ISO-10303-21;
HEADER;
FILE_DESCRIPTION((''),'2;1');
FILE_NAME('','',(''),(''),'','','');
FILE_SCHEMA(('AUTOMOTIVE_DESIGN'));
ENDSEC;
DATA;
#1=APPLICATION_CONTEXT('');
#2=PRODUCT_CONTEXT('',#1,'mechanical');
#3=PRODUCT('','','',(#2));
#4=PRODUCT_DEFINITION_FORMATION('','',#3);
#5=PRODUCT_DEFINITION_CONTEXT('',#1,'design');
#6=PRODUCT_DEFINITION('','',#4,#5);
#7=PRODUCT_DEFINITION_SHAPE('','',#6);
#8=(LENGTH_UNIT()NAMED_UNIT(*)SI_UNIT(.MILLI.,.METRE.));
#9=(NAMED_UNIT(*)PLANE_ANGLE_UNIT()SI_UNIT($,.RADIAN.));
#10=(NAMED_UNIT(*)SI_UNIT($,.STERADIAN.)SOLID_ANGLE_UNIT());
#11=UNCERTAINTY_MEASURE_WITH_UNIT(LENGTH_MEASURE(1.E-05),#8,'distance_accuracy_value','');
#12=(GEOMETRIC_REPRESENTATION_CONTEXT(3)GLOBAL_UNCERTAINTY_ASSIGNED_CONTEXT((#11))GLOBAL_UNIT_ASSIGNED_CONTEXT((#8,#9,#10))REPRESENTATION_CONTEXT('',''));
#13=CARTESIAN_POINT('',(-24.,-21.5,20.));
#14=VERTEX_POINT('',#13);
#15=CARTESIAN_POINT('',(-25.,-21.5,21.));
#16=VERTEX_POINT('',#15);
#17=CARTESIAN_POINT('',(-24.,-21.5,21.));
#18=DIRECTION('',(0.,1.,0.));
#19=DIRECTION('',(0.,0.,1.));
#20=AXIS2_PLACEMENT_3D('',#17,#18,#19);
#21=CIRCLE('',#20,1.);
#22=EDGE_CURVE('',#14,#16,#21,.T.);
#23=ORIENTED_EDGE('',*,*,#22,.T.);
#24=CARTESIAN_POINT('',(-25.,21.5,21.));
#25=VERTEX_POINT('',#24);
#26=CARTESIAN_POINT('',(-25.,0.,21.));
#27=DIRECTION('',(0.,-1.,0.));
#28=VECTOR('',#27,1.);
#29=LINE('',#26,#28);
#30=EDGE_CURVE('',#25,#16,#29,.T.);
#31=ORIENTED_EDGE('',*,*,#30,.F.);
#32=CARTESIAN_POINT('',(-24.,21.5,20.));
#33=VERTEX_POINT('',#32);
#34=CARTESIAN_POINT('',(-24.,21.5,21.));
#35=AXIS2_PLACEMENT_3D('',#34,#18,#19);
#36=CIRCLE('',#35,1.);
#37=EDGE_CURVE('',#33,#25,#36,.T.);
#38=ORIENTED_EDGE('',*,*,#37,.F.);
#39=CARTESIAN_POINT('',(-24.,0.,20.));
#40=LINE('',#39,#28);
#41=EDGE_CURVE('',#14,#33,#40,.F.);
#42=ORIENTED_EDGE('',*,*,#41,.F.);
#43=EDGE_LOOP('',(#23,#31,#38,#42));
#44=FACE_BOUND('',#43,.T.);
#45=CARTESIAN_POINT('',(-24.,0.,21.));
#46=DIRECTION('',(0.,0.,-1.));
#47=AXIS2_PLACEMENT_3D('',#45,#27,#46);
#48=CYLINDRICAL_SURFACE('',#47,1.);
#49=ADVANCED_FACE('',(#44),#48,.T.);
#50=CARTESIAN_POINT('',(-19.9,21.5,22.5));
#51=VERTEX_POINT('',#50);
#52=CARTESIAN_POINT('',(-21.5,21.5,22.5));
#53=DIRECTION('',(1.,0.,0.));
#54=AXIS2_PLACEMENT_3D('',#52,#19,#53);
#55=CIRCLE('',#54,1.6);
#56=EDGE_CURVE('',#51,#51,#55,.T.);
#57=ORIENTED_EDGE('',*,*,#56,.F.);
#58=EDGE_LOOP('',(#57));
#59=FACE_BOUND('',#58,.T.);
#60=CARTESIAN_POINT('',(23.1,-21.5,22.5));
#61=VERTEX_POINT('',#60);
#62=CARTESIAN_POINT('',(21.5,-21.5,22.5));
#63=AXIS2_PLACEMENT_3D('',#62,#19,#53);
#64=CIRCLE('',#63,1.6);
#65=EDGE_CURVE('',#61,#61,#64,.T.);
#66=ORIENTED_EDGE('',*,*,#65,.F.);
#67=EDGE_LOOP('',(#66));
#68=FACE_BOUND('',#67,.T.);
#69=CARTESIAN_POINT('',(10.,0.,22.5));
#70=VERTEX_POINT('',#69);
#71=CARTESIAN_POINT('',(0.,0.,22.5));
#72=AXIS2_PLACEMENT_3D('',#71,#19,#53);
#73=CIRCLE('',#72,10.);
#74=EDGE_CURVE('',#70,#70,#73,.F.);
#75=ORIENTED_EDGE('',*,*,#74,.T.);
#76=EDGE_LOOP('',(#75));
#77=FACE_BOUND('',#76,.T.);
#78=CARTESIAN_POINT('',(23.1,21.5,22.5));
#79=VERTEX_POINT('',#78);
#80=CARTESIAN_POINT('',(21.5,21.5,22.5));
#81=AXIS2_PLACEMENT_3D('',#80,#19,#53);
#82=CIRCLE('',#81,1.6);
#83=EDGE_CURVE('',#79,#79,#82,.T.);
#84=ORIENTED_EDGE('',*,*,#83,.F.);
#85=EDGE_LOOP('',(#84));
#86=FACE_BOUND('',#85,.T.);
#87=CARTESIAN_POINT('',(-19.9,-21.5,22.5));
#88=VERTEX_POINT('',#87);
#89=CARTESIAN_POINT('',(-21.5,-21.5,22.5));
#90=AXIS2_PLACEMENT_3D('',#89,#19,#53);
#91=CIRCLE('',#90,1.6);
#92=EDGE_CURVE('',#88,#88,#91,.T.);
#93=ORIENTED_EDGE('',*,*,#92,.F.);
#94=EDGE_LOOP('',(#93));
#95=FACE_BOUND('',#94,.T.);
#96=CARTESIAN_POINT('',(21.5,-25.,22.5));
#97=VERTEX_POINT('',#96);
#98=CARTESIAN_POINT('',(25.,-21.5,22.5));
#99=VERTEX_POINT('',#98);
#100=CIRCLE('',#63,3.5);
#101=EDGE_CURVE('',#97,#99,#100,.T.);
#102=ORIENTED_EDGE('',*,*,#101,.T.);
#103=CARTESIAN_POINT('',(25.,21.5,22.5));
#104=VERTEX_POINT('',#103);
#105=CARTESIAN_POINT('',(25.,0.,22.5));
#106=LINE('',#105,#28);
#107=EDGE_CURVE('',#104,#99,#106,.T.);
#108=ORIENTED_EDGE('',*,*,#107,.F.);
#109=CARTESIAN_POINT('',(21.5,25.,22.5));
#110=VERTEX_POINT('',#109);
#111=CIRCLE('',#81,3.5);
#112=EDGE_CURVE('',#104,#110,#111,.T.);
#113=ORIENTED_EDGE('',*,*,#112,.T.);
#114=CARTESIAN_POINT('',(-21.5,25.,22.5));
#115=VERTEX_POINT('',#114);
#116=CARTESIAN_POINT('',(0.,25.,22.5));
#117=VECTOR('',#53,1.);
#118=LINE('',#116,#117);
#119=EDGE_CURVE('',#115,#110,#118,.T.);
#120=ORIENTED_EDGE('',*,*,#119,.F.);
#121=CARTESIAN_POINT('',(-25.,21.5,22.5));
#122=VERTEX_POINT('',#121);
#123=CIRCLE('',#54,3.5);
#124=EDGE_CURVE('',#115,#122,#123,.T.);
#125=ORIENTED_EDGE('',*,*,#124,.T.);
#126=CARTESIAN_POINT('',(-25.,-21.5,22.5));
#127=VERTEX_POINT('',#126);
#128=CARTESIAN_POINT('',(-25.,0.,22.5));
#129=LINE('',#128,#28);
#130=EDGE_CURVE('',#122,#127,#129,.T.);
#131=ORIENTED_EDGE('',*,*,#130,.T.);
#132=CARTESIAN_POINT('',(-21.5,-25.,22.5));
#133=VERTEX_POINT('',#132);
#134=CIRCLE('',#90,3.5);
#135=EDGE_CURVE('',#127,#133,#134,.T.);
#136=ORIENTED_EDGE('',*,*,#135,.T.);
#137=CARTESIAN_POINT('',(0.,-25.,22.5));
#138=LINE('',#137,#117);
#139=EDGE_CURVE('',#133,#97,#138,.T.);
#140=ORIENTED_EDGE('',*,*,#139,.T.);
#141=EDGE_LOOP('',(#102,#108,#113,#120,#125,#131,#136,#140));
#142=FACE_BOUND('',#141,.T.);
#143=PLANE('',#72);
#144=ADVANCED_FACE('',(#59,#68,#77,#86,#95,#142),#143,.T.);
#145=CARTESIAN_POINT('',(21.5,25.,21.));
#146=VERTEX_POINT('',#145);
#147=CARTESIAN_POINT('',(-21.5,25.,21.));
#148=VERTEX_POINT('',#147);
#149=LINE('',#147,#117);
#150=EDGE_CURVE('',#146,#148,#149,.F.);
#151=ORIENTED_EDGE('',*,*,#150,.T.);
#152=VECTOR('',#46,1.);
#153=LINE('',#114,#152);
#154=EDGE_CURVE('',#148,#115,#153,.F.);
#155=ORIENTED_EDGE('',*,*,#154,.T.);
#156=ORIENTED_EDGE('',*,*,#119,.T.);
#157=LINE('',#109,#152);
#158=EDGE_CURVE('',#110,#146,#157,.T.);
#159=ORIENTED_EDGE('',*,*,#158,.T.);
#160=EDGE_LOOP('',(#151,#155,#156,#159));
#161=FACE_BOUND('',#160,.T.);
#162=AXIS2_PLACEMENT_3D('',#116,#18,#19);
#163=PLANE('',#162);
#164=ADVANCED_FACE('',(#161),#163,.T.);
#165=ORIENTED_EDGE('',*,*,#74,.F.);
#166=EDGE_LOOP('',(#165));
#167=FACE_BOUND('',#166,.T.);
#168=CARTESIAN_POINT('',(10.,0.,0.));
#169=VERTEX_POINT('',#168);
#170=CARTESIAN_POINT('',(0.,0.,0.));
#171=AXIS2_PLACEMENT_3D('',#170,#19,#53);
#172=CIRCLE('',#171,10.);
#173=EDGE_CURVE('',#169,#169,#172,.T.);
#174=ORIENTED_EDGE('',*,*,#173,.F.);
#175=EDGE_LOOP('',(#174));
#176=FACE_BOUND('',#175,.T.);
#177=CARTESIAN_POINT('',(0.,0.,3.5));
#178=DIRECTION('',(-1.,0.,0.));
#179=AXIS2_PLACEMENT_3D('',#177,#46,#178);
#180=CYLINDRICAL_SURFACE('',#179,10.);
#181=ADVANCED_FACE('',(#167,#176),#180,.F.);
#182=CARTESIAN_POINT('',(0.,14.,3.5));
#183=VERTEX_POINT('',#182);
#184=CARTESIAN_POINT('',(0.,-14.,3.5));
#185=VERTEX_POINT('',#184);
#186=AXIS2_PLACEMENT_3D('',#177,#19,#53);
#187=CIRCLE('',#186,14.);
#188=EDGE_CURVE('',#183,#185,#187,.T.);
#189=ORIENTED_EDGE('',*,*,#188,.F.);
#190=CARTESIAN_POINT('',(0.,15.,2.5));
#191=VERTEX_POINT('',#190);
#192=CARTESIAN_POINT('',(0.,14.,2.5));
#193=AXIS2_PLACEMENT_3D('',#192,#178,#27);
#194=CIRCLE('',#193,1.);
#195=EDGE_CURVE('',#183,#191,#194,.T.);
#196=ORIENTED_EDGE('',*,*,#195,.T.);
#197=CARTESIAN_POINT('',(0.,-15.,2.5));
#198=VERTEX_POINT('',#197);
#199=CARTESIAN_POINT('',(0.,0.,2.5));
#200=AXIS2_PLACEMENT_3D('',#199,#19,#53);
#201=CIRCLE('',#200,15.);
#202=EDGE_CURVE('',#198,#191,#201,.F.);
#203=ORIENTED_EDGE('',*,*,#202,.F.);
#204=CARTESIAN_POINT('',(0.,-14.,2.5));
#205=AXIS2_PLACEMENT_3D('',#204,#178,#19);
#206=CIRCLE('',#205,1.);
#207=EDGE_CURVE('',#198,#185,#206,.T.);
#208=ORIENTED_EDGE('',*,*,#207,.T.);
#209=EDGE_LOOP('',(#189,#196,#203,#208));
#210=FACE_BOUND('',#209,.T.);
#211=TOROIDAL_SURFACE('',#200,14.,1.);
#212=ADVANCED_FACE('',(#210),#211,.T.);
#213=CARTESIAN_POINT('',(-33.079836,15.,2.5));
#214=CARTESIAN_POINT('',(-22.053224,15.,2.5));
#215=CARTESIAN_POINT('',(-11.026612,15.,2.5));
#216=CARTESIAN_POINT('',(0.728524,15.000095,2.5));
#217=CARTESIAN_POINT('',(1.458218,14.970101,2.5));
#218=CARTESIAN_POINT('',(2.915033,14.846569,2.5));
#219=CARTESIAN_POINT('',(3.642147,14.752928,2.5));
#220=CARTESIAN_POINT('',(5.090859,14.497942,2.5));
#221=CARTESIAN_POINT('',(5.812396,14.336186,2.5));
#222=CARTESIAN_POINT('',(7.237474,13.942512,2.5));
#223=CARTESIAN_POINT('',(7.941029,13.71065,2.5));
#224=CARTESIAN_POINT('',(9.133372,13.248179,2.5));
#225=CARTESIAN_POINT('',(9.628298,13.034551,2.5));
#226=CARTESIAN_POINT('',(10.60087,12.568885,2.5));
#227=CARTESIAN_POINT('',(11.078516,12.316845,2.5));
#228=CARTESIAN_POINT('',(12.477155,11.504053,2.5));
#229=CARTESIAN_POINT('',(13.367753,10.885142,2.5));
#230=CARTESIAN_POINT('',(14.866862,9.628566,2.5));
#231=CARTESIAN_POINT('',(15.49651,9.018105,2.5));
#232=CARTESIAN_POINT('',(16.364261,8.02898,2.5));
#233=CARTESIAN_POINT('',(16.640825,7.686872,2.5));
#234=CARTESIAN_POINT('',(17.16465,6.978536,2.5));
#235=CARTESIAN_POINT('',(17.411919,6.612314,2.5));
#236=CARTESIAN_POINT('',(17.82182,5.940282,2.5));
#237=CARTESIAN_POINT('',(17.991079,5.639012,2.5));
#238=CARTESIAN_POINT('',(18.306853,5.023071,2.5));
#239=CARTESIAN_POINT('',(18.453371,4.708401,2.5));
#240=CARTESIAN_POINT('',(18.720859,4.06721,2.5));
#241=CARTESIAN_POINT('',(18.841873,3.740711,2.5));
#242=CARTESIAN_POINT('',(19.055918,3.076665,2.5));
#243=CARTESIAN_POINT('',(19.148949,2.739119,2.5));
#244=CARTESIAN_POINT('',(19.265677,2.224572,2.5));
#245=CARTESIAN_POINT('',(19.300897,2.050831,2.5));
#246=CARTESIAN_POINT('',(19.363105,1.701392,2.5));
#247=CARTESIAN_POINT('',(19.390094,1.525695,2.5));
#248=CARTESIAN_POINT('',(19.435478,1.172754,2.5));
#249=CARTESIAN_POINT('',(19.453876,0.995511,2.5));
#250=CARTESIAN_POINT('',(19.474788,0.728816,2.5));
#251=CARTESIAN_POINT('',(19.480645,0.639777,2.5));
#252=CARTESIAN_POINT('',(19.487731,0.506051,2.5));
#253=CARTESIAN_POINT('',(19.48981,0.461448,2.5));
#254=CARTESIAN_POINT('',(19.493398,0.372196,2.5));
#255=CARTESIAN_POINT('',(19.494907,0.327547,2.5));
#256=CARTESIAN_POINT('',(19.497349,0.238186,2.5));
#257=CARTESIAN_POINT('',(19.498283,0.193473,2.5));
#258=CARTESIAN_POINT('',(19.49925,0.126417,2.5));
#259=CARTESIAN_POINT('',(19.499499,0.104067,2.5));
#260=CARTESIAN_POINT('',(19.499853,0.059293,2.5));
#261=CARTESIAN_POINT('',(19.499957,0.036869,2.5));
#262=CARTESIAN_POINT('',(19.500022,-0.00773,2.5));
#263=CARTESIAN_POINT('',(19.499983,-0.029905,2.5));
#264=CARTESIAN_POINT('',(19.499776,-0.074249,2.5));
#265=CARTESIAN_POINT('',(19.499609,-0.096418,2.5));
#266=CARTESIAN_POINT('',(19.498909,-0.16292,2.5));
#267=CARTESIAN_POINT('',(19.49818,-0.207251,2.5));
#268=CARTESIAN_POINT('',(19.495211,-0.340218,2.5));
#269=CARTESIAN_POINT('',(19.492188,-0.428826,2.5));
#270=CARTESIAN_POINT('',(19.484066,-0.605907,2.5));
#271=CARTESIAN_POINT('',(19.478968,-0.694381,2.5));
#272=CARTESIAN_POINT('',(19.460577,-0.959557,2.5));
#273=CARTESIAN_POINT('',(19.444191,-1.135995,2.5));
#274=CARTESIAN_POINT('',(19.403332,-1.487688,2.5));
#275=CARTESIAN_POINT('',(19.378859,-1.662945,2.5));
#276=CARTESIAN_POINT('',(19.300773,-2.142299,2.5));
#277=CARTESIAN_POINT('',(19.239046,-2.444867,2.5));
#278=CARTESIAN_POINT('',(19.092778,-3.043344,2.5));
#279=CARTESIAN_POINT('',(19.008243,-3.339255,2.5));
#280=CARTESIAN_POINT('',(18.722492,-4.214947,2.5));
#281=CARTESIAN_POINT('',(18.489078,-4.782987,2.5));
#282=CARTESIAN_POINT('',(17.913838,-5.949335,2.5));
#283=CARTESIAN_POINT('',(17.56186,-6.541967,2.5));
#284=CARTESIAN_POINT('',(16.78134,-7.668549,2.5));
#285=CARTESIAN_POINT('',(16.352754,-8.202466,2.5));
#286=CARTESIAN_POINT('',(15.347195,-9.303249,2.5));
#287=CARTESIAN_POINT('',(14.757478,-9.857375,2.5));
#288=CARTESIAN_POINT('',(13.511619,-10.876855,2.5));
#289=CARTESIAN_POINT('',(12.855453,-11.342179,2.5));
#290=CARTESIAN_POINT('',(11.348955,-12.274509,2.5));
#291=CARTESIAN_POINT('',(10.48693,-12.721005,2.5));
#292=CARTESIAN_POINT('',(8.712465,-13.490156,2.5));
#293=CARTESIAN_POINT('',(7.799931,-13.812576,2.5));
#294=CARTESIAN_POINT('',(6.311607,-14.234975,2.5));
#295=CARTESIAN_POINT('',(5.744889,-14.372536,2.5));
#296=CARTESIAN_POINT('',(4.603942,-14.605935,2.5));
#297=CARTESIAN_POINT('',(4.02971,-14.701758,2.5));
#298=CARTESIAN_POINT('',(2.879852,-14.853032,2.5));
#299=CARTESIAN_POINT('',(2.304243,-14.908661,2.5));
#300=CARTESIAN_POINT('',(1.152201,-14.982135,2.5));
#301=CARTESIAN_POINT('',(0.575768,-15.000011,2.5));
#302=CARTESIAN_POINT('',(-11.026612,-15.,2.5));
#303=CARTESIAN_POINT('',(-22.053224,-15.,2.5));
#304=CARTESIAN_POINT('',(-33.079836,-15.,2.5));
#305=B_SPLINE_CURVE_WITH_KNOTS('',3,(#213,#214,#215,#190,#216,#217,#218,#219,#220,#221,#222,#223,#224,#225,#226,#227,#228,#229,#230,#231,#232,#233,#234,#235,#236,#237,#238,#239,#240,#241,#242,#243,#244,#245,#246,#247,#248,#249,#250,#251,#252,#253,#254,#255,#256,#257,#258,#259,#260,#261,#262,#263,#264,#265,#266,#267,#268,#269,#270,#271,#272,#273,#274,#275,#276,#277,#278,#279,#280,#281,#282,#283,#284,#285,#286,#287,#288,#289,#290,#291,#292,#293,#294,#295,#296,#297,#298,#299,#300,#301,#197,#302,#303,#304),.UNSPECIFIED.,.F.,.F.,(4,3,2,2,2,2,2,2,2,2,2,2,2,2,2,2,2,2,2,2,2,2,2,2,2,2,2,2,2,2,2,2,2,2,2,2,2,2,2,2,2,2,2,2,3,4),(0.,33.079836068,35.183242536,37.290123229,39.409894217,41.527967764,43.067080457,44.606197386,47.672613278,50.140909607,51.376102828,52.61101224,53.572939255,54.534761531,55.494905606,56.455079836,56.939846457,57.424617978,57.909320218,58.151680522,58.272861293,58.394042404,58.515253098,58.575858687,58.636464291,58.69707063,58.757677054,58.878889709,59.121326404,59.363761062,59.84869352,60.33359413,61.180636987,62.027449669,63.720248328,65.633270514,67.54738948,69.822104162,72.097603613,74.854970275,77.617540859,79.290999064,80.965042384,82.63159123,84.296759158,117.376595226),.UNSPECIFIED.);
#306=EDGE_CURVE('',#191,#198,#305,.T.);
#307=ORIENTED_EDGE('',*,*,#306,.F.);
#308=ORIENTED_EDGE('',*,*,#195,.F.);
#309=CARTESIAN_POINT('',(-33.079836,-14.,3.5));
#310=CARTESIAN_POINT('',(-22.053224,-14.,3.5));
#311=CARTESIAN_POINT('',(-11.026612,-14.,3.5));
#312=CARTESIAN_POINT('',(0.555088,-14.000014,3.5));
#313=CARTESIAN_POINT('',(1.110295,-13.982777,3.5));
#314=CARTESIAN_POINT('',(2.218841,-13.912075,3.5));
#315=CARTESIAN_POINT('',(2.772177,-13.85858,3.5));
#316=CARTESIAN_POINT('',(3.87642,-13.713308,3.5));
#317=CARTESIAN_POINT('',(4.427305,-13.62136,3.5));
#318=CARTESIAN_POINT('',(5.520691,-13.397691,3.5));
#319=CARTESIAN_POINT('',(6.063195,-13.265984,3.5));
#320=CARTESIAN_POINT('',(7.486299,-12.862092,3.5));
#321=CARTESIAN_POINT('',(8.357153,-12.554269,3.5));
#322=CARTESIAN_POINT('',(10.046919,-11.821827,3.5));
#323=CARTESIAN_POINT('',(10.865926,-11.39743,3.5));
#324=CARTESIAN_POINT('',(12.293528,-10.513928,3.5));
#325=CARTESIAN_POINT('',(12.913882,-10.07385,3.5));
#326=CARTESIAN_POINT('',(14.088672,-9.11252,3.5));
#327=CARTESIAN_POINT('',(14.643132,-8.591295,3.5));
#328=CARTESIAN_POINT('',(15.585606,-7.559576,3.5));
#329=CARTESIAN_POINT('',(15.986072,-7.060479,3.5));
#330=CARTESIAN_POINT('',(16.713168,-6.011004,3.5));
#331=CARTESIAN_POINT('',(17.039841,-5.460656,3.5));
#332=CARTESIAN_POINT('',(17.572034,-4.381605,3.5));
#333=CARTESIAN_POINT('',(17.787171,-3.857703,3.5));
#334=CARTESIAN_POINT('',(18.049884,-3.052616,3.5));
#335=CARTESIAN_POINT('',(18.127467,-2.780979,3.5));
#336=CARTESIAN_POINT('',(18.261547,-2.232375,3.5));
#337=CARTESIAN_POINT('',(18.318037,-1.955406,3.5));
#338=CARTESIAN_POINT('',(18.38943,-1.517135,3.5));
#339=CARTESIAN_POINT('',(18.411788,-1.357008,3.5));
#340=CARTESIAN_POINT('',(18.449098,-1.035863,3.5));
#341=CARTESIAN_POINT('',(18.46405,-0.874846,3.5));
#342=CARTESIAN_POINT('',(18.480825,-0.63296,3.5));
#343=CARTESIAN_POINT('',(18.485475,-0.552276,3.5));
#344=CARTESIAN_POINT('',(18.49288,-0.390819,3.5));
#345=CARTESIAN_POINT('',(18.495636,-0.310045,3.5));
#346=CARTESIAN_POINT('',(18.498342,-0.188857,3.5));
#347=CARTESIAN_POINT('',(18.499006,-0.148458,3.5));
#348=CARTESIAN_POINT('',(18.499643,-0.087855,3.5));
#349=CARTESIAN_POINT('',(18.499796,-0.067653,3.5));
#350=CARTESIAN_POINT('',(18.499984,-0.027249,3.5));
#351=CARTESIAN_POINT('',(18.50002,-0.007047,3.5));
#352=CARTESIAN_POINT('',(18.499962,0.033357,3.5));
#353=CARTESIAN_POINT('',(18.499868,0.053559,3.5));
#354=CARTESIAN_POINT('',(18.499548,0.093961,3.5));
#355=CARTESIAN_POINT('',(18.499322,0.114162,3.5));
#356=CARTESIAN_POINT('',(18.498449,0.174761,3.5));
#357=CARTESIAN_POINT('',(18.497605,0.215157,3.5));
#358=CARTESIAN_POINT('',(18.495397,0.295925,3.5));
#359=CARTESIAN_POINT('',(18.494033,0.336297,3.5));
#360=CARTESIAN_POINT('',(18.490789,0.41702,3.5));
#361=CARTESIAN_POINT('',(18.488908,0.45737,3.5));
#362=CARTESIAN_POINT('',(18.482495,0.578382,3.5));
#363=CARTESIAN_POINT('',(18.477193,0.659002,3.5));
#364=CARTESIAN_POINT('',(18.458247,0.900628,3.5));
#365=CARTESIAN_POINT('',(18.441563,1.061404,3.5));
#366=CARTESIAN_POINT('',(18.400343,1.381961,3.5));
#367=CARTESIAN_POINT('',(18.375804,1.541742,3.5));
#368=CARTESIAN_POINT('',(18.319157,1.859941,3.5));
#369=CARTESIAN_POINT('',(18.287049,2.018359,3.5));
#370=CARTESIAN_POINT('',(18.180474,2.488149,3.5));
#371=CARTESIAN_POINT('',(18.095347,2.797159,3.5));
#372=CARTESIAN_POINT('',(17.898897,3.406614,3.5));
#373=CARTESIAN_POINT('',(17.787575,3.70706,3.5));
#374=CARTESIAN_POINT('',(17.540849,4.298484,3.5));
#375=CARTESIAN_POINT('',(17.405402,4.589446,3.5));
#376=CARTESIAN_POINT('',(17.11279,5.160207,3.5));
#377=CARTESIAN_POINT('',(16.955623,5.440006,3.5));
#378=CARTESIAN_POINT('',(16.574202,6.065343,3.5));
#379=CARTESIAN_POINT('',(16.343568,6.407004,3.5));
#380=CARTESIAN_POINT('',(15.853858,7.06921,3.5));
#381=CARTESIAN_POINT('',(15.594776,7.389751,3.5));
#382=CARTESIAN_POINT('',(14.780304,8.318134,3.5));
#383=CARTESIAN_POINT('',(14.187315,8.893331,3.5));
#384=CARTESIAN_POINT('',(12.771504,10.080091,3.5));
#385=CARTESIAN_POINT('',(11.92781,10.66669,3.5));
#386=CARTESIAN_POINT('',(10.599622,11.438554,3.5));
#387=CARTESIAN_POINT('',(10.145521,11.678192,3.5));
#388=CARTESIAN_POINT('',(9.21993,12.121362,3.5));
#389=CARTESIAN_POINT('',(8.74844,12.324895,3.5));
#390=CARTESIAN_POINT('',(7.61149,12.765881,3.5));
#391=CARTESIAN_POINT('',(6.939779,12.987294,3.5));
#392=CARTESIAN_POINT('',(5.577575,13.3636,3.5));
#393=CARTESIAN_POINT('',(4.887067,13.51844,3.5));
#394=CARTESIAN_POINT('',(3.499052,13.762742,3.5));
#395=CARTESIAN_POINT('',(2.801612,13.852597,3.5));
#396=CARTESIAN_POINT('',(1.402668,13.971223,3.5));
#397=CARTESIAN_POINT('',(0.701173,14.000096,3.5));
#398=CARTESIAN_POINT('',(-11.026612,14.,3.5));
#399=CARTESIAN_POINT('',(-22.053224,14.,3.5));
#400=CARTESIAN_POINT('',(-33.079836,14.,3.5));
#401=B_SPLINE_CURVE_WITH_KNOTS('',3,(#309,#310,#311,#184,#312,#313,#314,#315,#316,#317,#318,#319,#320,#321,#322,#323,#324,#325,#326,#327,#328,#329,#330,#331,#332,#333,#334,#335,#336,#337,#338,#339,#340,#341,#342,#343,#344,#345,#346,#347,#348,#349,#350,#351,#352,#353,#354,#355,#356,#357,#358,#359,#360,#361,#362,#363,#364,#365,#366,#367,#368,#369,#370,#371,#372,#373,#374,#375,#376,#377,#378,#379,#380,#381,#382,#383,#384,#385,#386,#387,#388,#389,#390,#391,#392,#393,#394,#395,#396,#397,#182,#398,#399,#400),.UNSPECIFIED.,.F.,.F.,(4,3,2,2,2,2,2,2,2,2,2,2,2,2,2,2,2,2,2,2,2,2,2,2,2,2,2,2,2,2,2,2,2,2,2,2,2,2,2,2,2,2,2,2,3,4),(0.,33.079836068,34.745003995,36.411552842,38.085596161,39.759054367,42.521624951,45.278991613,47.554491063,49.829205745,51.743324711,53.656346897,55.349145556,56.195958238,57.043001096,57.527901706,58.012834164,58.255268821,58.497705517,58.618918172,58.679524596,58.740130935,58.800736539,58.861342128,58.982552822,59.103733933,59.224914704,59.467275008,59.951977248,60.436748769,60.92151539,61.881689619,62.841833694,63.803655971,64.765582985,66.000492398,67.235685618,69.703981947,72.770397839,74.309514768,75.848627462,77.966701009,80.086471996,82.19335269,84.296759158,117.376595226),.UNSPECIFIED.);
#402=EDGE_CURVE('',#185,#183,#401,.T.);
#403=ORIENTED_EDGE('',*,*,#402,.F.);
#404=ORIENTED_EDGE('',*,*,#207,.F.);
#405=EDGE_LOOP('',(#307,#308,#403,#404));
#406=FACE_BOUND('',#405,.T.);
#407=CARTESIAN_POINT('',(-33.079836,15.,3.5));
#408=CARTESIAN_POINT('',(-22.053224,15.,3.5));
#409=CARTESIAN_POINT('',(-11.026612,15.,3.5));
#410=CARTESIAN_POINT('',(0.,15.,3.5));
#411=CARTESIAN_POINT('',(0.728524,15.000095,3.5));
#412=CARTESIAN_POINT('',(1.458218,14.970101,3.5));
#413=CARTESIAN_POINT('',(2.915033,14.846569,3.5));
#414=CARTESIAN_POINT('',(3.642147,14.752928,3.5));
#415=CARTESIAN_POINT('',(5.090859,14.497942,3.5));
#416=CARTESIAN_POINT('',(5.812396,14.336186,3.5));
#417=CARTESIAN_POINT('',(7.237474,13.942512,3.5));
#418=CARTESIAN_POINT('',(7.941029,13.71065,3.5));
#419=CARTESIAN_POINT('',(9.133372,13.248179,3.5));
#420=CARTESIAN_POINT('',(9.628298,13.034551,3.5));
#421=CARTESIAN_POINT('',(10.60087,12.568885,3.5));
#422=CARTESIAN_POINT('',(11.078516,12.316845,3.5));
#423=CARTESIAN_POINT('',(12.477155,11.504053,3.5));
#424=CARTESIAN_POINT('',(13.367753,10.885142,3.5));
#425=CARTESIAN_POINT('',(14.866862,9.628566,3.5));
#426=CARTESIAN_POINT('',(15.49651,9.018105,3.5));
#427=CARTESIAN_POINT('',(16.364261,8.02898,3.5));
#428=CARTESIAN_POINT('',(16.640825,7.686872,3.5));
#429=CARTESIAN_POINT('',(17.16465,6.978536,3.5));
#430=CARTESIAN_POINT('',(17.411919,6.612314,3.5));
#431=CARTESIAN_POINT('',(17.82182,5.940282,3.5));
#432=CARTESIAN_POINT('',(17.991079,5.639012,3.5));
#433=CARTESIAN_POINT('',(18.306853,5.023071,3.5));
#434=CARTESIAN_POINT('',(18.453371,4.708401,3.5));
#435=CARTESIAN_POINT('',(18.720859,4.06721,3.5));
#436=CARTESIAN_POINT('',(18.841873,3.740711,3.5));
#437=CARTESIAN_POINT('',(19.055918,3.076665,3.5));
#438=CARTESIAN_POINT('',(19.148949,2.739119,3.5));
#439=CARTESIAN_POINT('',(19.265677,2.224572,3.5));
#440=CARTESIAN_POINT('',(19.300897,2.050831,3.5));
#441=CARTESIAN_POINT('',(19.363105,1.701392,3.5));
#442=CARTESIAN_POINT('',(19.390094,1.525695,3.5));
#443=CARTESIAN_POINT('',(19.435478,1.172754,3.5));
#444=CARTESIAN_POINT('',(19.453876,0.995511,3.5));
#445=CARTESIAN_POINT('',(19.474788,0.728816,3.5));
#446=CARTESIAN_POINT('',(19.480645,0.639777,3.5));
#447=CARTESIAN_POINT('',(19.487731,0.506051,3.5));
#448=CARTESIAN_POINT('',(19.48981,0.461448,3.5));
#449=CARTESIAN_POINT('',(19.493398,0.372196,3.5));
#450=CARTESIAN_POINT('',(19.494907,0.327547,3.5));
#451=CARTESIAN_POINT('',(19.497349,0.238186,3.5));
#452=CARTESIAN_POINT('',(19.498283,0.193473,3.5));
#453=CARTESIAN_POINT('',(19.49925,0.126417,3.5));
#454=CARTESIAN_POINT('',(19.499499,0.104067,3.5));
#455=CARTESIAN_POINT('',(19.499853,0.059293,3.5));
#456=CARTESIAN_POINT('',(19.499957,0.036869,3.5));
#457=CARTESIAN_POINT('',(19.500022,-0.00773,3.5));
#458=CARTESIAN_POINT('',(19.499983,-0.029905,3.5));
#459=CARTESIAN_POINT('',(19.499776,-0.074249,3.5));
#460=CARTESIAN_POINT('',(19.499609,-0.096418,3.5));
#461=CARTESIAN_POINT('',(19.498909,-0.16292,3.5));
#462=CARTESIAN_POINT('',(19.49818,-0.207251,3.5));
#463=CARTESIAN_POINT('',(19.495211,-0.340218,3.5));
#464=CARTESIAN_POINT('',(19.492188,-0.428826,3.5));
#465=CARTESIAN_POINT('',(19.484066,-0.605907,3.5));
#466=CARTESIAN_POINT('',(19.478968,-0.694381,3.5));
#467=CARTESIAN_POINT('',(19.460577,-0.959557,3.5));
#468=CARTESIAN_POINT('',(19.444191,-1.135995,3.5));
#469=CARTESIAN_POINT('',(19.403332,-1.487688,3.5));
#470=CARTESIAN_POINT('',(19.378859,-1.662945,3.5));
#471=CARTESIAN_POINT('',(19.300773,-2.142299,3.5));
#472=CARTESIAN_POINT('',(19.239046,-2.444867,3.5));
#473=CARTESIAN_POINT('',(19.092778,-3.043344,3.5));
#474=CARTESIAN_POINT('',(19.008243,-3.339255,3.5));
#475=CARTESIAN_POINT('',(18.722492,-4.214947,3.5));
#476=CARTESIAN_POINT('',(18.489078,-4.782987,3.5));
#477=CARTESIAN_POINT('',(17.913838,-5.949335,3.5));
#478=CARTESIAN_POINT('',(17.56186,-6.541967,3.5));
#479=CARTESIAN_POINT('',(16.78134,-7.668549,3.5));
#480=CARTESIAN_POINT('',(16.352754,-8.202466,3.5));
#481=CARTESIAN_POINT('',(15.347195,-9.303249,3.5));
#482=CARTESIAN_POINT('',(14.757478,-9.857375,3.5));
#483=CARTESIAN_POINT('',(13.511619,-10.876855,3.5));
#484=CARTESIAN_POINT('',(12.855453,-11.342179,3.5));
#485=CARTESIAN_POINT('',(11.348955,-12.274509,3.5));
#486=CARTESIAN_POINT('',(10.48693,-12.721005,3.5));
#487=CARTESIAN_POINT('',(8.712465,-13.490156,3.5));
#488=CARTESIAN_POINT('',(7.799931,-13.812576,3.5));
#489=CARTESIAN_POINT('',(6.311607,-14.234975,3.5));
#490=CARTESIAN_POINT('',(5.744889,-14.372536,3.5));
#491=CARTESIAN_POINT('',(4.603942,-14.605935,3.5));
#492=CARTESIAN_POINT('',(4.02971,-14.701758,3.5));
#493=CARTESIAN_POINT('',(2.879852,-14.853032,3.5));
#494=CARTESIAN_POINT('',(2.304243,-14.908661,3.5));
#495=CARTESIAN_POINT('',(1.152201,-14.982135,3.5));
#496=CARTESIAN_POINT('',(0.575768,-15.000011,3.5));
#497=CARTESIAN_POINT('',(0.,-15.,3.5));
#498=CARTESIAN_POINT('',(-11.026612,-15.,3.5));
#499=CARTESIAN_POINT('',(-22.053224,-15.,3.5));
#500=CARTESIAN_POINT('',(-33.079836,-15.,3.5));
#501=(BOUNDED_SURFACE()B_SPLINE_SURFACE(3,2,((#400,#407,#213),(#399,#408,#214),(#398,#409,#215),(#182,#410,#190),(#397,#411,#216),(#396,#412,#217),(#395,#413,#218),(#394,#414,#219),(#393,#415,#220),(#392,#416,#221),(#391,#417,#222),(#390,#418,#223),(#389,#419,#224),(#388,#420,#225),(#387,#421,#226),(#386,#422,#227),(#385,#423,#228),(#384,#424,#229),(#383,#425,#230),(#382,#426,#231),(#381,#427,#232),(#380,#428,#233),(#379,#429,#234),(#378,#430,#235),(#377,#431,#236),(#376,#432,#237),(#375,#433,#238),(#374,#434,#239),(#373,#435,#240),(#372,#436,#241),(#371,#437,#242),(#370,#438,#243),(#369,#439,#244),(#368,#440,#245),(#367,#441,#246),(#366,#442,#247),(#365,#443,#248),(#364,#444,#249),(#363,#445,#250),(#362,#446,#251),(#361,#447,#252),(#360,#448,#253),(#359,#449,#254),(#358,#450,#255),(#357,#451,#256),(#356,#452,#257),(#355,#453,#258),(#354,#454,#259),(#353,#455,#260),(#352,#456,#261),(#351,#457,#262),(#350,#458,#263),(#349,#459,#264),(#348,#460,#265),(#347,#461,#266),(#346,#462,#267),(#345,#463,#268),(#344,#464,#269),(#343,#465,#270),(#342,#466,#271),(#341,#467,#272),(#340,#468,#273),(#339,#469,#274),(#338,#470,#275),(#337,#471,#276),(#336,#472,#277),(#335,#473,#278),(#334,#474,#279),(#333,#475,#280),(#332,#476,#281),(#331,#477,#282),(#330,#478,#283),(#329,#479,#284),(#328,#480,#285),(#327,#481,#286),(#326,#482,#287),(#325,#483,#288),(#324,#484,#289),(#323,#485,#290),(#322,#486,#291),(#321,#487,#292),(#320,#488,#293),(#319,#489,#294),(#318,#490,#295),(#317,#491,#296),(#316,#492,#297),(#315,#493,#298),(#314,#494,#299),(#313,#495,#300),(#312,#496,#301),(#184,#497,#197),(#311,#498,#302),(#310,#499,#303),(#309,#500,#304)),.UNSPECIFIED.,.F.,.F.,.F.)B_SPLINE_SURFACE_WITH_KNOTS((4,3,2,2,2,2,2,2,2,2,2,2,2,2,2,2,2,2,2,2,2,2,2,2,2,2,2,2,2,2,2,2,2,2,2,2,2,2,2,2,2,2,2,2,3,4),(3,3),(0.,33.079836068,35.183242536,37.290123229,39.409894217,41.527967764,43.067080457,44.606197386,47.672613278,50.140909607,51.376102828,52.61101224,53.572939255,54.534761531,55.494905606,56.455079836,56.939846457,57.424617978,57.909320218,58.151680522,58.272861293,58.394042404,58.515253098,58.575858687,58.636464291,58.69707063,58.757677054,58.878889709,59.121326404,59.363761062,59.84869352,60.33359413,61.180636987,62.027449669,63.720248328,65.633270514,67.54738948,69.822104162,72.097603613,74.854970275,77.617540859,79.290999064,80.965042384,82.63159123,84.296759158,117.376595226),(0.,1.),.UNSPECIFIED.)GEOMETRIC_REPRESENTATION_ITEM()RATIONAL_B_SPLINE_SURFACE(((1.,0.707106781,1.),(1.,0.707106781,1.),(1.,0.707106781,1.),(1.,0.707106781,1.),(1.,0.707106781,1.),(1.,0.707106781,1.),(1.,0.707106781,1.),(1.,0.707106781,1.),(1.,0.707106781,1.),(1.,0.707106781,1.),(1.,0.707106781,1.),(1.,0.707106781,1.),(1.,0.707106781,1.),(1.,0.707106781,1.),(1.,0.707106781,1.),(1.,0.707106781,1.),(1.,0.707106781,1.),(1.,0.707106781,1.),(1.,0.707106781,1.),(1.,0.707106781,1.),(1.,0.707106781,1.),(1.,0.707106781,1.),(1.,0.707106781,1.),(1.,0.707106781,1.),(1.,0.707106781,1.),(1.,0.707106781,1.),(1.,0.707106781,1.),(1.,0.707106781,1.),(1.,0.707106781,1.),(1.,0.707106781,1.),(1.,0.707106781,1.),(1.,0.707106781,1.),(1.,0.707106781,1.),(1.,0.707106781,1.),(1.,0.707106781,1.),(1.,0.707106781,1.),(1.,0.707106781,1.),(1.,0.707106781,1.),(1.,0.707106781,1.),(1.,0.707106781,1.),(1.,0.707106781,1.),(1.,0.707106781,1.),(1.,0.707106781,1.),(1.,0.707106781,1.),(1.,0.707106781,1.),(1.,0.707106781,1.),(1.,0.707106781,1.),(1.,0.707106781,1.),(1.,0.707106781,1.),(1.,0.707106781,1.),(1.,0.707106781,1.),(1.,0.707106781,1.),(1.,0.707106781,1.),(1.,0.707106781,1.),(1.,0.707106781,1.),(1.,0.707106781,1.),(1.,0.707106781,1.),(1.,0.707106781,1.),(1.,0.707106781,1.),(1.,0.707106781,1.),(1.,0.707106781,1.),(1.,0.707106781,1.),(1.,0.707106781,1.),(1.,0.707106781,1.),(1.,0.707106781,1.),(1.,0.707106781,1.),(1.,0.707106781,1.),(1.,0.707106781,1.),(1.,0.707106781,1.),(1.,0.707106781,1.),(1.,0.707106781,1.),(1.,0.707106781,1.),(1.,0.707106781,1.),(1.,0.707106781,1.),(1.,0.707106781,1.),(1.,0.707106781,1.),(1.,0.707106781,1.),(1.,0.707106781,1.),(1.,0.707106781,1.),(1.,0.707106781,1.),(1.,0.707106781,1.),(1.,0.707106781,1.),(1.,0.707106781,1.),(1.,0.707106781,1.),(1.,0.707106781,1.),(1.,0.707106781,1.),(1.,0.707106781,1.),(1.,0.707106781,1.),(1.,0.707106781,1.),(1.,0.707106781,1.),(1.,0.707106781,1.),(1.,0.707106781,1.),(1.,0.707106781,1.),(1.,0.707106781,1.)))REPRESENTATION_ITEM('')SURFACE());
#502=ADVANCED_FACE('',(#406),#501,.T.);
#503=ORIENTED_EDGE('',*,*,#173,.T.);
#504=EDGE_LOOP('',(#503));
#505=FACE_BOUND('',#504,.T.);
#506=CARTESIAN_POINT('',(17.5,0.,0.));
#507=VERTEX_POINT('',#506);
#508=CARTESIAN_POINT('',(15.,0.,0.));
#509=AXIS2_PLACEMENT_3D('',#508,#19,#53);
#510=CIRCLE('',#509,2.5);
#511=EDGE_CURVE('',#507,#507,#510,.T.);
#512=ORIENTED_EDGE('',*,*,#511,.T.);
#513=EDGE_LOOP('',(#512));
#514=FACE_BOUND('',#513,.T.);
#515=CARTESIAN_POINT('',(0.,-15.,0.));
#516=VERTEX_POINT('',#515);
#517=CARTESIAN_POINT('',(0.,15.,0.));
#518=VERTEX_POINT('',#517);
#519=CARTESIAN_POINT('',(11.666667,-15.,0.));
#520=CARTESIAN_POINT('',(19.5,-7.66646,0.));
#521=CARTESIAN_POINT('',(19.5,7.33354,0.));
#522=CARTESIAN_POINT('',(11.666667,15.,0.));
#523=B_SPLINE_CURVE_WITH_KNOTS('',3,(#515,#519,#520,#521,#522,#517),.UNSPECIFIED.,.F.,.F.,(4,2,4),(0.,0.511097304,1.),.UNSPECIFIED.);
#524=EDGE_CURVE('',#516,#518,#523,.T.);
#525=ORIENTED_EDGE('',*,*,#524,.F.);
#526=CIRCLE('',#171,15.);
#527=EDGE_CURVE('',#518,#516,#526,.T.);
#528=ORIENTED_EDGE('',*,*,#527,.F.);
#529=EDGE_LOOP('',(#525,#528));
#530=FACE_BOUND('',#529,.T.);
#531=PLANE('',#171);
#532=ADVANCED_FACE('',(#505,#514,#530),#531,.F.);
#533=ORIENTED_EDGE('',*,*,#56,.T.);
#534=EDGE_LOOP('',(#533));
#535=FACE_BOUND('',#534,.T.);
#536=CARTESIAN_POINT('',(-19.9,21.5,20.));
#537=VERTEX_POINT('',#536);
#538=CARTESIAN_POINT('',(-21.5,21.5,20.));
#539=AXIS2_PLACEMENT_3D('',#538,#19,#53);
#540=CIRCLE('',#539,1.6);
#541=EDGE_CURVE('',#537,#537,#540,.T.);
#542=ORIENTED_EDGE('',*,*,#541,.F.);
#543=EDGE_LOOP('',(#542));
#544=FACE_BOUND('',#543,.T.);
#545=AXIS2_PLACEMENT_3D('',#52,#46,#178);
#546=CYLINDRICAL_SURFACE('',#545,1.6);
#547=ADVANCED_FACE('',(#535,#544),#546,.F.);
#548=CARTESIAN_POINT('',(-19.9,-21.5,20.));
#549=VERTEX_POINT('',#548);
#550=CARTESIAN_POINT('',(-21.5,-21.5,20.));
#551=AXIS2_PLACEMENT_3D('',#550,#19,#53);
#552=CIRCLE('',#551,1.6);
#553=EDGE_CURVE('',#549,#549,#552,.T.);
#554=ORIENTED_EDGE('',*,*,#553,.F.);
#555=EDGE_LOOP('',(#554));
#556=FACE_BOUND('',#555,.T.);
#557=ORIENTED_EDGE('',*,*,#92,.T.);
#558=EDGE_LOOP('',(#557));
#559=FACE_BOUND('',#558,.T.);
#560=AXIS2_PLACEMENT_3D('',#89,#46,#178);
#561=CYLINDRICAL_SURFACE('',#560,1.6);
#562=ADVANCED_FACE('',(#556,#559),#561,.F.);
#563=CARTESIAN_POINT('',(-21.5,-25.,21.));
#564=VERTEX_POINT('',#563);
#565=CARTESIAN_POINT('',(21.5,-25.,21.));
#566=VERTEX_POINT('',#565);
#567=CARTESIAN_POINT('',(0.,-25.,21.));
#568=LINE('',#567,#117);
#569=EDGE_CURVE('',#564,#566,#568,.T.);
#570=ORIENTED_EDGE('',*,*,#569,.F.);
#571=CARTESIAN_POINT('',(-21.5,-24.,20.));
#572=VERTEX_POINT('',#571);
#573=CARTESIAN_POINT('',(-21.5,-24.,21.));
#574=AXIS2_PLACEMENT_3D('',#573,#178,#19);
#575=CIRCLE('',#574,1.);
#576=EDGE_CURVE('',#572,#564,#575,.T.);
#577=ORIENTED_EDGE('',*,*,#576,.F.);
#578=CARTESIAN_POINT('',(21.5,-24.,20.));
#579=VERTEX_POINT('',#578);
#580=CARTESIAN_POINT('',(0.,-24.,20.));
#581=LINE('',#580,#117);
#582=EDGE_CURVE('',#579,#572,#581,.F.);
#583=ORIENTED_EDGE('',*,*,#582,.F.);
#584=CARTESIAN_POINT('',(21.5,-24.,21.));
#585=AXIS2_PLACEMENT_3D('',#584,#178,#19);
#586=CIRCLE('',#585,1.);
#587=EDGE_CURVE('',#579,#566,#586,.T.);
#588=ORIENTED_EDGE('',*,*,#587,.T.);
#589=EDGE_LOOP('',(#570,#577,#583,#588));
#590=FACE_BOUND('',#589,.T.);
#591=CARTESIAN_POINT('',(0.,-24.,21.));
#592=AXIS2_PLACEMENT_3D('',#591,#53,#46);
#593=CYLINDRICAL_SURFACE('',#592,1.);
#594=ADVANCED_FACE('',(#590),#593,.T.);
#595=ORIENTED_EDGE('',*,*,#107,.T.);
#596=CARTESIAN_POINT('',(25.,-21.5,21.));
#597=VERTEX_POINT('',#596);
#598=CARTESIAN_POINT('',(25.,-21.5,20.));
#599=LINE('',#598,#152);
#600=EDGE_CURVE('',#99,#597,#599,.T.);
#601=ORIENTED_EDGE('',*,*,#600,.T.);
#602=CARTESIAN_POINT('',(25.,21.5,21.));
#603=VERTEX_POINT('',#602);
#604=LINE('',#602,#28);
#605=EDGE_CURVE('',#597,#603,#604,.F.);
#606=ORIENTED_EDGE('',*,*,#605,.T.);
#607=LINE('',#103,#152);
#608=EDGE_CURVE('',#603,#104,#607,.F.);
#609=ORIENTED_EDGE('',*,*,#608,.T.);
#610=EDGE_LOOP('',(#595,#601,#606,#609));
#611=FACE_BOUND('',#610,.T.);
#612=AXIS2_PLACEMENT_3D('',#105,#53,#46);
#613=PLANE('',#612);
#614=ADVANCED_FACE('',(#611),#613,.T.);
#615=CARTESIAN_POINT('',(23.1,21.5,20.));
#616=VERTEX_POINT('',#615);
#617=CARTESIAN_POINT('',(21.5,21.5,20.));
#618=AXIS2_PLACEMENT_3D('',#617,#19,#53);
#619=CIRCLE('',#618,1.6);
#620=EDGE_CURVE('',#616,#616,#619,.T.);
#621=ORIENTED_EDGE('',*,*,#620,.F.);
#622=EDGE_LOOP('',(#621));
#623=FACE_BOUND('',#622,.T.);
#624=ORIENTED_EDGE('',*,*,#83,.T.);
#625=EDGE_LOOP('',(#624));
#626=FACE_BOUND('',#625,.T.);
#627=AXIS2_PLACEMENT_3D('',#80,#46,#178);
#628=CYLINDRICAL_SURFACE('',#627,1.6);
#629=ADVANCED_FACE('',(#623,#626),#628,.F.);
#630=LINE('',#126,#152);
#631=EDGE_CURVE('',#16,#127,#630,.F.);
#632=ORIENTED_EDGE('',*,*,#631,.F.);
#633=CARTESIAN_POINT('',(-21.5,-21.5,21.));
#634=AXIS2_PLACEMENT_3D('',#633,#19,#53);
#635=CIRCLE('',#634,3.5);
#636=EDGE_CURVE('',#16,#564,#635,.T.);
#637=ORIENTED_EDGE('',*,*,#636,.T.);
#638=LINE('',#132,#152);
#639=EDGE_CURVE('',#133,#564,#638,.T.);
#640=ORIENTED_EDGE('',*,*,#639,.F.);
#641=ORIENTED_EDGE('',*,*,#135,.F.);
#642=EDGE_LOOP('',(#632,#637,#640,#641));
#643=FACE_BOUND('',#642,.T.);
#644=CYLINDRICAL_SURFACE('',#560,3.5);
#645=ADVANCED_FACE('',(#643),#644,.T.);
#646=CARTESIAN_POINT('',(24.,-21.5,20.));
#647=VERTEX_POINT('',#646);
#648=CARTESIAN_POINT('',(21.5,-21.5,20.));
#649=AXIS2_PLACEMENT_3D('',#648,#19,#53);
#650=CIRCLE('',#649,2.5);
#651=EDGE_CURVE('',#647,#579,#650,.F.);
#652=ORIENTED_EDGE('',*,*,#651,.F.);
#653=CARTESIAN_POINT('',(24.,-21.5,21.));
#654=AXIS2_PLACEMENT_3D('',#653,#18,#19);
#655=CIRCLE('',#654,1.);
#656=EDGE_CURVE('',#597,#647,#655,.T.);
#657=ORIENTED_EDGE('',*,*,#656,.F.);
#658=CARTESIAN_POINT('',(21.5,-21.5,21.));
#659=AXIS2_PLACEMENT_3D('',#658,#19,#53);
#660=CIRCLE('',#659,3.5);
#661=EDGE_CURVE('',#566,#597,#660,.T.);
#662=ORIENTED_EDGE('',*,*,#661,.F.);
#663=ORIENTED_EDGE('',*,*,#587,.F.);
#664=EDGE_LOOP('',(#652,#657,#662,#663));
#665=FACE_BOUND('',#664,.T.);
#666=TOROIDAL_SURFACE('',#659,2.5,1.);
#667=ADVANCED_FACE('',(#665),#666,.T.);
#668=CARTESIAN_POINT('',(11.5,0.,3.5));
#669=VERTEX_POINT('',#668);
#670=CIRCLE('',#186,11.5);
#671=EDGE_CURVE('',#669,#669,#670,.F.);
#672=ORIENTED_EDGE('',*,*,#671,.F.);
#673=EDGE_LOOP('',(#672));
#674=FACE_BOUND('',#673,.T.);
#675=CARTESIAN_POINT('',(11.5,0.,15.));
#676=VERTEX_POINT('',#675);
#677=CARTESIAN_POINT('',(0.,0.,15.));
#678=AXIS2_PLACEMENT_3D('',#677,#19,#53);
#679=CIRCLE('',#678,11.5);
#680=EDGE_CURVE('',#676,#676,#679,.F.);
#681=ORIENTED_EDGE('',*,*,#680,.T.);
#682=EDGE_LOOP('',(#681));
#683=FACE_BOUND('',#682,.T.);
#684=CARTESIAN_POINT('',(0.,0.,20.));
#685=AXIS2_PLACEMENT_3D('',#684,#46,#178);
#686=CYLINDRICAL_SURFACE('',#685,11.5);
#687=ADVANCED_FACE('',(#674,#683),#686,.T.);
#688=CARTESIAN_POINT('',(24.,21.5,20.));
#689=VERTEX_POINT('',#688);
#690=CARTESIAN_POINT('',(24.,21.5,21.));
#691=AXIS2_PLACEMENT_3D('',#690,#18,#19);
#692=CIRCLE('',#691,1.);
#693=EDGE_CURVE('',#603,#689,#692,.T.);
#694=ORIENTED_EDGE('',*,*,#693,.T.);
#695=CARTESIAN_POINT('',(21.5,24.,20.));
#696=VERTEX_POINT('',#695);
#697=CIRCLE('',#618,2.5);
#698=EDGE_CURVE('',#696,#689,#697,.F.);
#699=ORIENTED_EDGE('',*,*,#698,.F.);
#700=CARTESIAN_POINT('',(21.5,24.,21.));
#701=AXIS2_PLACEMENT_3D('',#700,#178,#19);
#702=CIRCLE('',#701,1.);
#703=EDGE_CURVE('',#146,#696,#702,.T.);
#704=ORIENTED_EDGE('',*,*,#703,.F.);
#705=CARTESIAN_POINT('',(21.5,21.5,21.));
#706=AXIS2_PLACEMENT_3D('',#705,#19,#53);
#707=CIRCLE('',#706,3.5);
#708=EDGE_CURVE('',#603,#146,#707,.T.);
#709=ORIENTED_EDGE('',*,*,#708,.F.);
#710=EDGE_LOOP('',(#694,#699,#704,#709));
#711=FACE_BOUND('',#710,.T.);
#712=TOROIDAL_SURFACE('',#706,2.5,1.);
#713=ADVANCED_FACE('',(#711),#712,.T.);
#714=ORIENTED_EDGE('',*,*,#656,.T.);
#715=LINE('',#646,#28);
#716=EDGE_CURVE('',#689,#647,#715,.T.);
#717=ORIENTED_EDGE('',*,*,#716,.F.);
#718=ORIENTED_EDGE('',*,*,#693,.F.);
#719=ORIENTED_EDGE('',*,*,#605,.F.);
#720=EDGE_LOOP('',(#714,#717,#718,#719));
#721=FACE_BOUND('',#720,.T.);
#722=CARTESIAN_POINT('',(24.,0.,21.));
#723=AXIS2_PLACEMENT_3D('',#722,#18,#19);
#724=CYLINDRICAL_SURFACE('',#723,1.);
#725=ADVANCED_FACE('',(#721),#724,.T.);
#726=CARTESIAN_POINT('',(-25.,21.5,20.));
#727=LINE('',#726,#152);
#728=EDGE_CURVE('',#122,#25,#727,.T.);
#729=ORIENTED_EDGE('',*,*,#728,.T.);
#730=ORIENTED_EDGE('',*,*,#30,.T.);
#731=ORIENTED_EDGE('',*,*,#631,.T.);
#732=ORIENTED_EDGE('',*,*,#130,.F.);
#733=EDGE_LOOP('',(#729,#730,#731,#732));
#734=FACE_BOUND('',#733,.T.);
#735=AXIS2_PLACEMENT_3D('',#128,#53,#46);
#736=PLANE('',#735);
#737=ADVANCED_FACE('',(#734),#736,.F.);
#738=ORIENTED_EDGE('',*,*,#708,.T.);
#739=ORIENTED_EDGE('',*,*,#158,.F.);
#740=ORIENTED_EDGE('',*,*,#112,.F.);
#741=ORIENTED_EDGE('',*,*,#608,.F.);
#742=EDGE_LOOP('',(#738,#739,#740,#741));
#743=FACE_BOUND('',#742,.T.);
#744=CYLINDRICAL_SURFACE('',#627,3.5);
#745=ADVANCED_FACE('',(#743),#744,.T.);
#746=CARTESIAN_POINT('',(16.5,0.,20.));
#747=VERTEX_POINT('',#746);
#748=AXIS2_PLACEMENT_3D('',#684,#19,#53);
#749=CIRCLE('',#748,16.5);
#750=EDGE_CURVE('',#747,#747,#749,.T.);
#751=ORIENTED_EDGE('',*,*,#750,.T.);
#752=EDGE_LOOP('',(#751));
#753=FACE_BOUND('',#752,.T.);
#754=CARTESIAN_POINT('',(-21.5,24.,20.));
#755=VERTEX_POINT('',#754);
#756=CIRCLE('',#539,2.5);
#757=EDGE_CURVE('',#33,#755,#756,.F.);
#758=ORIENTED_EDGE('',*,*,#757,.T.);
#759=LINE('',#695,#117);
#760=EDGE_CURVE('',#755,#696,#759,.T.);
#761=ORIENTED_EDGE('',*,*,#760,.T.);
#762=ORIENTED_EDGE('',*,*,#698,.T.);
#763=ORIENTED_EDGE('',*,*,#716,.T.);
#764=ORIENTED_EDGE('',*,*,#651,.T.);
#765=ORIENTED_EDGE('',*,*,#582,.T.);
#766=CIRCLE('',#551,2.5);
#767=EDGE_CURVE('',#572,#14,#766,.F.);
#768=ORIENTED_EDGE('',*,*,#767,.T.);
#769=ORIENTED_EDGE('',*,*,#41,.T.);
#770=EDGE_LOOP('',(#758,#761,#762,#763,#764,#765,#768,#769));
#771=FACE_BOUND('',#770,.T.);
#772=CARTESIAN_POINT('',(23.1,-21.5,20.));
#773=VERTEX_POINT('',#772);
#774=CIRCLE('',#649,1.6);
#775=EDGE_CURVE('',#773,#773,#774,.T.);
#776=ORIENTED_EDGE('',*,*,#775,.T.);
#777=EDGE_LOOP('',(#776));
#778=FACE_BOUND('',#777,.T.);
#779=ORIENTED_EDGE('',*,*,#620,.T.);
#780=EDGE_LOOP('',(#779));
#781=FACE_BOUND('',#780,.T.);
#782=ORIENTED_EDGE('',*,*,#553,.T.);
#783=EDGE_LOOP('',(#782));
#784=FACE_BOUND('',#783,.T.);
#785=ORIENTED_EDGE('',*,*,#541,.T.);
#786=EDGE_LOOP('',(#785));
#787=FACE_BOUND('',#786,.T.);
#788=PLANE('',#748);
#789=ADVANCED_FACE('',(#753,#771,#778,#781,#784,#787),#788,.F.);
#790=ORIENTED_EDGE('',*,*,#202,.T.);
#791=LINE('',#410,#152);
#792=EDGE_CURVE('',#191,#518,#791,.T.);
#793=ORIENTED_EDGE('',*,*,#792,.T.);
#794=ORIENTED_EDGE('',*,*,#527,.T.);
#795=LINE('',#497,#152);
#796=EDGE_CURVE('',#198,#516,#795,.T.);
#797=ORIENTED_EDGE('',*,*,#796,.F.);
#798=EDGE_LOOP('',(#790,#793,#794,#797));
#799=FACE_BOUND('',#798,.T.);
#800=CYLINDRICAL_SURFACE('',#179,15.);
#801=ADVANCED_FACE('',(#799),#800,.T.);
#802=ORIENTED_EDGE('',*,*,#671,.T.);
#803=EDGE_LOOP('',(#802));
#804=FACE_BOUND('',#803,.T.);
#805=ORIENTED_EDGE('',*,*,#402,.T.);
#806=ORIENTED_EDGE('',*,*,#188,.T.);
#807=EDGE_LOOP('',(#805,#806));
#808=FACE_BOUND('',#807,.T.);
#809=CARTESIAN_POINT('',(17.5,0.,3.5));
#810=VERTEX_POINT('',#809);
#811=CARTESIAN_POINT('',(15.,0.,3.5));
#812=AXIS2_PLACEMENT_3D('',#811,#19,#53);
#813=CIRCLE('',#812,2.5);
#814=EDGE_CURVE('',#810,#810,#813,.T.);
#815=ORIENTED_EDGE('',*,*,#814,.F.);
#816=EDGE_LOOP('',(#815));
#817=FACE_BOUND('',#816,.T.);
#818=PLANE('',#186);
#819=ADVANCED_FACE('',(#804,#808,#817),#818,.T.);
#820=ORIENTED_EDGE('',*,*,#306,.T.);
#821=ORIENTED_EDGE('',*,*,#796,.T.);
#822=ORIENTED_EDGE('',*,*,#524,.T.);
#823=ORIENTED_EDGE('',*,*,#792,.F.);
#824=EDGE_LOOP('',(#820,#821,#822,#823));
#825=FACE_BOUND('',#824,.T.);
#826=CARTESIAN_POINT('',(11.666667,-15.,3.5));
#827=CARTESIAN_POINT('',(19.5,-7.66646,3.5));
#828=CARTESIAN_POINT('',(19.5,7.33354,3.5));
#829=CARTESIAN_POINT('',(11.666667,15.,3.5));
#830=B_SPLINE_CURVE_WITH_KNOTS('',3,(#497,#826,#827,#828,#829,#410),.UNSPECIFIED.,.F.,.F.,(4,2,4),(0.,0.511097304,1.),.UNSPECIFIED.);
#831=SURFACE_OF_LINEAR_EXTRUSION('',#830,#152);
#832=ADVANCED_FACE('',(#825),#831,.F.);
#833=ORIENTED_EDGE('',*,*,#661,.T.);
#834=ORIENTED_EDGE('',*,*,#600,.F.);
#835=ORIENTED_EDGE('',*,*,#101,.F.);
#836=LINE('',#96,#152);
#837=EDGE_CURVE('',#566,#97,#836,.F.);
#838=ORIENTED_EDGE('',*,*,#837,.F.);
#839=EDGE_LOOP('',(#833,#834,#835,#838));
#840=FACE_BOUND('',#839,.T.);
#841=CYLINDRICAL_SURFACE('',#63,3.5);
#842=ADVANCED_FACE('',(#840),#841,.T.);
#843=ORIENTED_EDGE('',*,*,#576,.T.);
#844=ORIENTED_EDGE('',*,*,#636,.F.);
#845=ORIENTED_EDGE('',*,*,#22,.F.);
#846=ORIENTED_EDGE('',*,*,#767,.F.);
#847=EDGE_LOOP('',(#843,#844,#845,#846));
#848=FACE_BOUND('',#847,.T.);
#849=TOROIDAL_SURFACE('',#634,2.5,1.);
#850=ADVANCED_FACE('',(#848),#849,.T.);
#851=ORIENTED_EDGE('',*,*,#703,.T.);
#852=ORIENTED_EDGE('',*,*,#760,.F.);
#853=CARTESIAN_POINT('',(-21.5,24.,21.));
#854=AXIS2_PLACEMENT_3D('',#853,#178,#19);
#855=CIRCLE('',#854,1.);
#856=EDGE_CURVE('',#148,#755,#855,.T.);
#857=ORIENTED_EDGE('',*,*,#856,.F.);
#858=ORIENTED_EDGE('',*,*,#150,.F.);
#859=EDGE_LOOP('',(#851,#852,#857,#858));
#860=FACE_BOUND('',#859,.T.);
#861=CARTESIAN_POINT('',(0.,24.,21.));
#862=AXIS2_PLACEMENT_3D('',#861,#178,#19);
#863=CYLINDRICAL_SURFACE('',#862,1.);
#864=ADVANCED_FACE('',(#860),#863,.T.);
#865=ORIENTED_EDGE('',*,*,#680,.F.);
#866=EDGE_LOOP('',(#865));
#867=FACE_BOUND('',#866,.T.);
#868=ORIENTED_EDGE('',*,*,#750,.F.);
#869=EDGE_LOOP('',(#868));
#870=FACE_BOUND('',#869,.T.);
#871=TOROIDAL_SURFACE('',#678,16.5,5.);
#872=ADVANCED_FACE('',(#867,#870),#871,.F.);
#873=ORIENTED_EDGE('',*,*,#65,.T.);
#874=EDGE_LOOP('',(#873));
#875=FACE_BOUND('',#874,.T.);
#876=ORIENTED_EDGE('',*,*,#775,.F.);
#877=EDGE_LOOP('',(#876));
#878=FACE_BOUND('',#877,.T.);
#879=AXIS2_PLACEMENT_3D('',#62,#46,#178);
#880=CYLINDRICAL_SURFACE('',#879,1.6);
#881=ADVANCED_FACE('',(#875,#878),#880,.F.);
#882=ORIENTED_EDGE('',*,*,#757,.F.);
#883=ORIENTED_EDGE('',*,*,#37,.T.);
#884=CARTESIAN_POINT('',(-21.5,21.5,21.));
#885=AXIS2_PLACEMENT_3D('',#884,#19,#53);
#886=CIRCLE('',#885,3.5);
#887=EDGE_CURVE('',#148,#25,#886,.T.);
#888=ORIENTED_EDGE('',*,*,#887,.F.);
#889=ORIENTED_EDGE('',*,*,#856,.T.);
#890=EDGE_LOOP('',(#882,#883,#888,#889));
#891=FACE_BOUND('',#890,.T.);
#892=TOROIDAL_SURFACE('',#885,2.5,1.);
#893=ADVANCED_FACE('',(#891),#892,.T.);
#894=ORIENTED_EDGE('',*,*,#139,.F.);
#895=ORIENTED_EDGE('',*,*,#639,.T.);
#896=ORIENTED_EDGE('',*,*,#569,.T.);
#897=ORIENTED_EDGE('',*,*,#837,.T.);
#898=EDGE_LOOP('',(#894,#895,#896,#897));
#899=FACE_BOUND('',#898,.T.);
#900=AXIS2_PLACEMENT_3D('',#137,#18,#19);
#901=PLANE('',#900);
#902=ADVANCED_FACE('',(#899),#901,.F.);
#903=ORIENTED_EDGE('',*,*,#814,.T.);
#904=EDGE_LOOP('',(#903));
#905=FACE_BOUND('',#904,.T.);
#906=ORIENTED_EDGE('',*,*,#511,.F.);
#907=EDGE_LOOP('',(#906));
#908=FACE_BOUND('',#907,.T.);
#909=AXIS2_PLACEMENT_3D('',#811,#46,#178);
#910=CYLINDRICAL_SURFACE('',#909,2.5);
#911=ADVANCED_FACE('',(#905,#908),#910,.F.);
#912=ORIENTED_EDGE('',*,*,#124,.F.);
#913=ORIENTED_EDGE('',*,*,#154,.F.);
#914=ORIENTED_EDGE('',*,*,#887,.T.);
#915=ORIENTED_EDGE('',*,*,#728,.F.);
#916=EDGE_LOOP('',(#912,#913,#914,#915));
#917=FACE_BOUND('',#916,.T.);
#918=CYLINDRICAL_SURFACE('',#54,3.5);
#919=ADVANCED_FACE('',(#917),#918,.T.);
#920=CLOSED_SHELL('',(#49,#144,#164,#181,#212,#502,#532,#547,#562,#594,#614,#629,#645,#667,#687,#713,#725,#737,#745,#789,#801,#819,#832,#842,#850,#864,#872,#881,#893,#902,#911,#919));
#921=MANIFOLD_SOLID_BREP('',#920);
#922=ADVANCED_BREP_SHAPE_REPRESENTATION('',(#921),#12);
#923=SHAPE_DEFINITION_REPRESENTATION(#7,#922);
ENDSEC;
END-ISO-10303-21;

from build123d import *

# Parameters (mm, degrees)
BOSS_EXTRUDE1_OUTLINE_R   = 10
BOSS_EXTRUDE1_OUTLINE_R_2 = 2.5
BOSS_EXTRUDE1_DEPTH       = 3.5
SKETCH1_3_R               = 11.5
SKETCH1_3_R_2             = 10
BOSS_EXTRUDE2_DEPTH       = 20
SKETCH2_W                 = 50
SKETCH2_H                 = 50
SKETCH2_R                 = 1.6
SKETCH2_R_2               = 11.5
SKETCH2_R_3               = 10
BOSS_EXTRUDE3_DEPTH       = 2.5
FILLET1_R                 = 3.5
FILLET2_R                 = 5
FILLET3_R                 = 1


# Read off the part's stored shape, not the designer's step: Boss-Extrude1
with BuildPart() as part:
    # Boss-Extrude1 outline → Boss-Extrude1 (new body)
    with BuildSketch(Plane.XY):
        with BuildLine():
            ThreePointArc((0, 15), (-15, 0), (0, -15))
            add(Edge.make_bspline(
                [(0, -15), (11.666666667, -15), (19.5, -7.666459565), (19.5, 7.333540435), (11.666666667, 15), (0, 15)],
                knots=[0, 0, 0, 0, 0.511097304, 0.511097304, 1, 1, 1, 1], degree=3))
        make_face()
        Circle(BOSS_EXTRUDE1_OUTLINE_R, mode=Mode.SUBTRACT)
        with Locations((15, 0)):
            Circle(BOSS_EXTRUDE1_OUTLINE_R_2, mode=Mode.SUBTRACT)
    extrude(amount=BOSS_EXTRUDE1_DEPTH)

    # Sketch1<3> → Boss-Extrude2 (add)
    with BuildSketch(Plane.XY):
        Circle(SKETCH1_3_R)
        Circle(SKETCH1_3_R_2, mode=Mode.SUBTRACT)
    extrude(amount=BOSS_EXTRUDE2_DEPTH)

    # Sketch2 → Boss-Extrude3 (add)
    # profile 1 of 2: a face of its own
    with BuildSketch(Plane.XY.offset(20)):
        Rectangle(SKETCH2_W, SKETCH2_H)
        with Locations((21.5, 21.5)):
            Circle(SKETCH2_R, mode=Mode.SUBTRACT)
        with Locations((21.5, -21.5)):
            Circle(SKETCH2_R, mode=Mode.SUBTRACT)
        with Locations((-21.5, -21.5)):
            Circle(SKETCH2_R, mode=Mode.SUBTRACT)
        with Locations((-21.5, 21.5)):
            Circle(SKETCH2_R, mode=Mode.SUBTRACT)
        Circle(SKETCH2_R_2, mode=Mode.SUBTRACT)
    # profile 2 of 2: a face of its own
    with BuildSketch(Plane.XY.offset(20)):
        Circle(SKETCH2_R_2)
        Circle(SKETCH2_R_3, mode=Mode.SUBTRACT)
    extrude(amount=BOSS_EXTRUDE3_DEPTH)

    # Fillet1
    fillet1_edges = [part.edges().sort_by_distance(p)[0] for p in [
        (25, -25, 21.25),
        (25, 25, 21.25),
        (-25, 25, 21.25),
        (-25, -25, 21.25),
    ]]
    fillet(fillet1_edges, radius=FILLET1_R)

    # Fillet2
    fillet2_edges = [part.edges().sort_by_distance(p)[0] for p in [
        (-11.5, 0, 20),
    ]]
    fillet(fillet2_edges, radius=FILLET2_R)

    # Fillet3
    fillet3_edges = [part.edges().sort_by_distance(p)[0] for p in [
        (-15, 0, 3.5),
        (25, 0, 20),
        (0, -25, 20),
        (-25, 0, 20),
        (0, 25, 20),
        (23.974873734, 23.974873734, 20),
        (-23.974873734, 23.974873734, 20),
        (-23.974873734, -23.974873734, 20),
        (23.974873734, -23.974873734, 20),
        (10, 0, 11.25),
    ]]
    fillet(fillet3_edges, radius=FILLET3_R)


solid = part.part
